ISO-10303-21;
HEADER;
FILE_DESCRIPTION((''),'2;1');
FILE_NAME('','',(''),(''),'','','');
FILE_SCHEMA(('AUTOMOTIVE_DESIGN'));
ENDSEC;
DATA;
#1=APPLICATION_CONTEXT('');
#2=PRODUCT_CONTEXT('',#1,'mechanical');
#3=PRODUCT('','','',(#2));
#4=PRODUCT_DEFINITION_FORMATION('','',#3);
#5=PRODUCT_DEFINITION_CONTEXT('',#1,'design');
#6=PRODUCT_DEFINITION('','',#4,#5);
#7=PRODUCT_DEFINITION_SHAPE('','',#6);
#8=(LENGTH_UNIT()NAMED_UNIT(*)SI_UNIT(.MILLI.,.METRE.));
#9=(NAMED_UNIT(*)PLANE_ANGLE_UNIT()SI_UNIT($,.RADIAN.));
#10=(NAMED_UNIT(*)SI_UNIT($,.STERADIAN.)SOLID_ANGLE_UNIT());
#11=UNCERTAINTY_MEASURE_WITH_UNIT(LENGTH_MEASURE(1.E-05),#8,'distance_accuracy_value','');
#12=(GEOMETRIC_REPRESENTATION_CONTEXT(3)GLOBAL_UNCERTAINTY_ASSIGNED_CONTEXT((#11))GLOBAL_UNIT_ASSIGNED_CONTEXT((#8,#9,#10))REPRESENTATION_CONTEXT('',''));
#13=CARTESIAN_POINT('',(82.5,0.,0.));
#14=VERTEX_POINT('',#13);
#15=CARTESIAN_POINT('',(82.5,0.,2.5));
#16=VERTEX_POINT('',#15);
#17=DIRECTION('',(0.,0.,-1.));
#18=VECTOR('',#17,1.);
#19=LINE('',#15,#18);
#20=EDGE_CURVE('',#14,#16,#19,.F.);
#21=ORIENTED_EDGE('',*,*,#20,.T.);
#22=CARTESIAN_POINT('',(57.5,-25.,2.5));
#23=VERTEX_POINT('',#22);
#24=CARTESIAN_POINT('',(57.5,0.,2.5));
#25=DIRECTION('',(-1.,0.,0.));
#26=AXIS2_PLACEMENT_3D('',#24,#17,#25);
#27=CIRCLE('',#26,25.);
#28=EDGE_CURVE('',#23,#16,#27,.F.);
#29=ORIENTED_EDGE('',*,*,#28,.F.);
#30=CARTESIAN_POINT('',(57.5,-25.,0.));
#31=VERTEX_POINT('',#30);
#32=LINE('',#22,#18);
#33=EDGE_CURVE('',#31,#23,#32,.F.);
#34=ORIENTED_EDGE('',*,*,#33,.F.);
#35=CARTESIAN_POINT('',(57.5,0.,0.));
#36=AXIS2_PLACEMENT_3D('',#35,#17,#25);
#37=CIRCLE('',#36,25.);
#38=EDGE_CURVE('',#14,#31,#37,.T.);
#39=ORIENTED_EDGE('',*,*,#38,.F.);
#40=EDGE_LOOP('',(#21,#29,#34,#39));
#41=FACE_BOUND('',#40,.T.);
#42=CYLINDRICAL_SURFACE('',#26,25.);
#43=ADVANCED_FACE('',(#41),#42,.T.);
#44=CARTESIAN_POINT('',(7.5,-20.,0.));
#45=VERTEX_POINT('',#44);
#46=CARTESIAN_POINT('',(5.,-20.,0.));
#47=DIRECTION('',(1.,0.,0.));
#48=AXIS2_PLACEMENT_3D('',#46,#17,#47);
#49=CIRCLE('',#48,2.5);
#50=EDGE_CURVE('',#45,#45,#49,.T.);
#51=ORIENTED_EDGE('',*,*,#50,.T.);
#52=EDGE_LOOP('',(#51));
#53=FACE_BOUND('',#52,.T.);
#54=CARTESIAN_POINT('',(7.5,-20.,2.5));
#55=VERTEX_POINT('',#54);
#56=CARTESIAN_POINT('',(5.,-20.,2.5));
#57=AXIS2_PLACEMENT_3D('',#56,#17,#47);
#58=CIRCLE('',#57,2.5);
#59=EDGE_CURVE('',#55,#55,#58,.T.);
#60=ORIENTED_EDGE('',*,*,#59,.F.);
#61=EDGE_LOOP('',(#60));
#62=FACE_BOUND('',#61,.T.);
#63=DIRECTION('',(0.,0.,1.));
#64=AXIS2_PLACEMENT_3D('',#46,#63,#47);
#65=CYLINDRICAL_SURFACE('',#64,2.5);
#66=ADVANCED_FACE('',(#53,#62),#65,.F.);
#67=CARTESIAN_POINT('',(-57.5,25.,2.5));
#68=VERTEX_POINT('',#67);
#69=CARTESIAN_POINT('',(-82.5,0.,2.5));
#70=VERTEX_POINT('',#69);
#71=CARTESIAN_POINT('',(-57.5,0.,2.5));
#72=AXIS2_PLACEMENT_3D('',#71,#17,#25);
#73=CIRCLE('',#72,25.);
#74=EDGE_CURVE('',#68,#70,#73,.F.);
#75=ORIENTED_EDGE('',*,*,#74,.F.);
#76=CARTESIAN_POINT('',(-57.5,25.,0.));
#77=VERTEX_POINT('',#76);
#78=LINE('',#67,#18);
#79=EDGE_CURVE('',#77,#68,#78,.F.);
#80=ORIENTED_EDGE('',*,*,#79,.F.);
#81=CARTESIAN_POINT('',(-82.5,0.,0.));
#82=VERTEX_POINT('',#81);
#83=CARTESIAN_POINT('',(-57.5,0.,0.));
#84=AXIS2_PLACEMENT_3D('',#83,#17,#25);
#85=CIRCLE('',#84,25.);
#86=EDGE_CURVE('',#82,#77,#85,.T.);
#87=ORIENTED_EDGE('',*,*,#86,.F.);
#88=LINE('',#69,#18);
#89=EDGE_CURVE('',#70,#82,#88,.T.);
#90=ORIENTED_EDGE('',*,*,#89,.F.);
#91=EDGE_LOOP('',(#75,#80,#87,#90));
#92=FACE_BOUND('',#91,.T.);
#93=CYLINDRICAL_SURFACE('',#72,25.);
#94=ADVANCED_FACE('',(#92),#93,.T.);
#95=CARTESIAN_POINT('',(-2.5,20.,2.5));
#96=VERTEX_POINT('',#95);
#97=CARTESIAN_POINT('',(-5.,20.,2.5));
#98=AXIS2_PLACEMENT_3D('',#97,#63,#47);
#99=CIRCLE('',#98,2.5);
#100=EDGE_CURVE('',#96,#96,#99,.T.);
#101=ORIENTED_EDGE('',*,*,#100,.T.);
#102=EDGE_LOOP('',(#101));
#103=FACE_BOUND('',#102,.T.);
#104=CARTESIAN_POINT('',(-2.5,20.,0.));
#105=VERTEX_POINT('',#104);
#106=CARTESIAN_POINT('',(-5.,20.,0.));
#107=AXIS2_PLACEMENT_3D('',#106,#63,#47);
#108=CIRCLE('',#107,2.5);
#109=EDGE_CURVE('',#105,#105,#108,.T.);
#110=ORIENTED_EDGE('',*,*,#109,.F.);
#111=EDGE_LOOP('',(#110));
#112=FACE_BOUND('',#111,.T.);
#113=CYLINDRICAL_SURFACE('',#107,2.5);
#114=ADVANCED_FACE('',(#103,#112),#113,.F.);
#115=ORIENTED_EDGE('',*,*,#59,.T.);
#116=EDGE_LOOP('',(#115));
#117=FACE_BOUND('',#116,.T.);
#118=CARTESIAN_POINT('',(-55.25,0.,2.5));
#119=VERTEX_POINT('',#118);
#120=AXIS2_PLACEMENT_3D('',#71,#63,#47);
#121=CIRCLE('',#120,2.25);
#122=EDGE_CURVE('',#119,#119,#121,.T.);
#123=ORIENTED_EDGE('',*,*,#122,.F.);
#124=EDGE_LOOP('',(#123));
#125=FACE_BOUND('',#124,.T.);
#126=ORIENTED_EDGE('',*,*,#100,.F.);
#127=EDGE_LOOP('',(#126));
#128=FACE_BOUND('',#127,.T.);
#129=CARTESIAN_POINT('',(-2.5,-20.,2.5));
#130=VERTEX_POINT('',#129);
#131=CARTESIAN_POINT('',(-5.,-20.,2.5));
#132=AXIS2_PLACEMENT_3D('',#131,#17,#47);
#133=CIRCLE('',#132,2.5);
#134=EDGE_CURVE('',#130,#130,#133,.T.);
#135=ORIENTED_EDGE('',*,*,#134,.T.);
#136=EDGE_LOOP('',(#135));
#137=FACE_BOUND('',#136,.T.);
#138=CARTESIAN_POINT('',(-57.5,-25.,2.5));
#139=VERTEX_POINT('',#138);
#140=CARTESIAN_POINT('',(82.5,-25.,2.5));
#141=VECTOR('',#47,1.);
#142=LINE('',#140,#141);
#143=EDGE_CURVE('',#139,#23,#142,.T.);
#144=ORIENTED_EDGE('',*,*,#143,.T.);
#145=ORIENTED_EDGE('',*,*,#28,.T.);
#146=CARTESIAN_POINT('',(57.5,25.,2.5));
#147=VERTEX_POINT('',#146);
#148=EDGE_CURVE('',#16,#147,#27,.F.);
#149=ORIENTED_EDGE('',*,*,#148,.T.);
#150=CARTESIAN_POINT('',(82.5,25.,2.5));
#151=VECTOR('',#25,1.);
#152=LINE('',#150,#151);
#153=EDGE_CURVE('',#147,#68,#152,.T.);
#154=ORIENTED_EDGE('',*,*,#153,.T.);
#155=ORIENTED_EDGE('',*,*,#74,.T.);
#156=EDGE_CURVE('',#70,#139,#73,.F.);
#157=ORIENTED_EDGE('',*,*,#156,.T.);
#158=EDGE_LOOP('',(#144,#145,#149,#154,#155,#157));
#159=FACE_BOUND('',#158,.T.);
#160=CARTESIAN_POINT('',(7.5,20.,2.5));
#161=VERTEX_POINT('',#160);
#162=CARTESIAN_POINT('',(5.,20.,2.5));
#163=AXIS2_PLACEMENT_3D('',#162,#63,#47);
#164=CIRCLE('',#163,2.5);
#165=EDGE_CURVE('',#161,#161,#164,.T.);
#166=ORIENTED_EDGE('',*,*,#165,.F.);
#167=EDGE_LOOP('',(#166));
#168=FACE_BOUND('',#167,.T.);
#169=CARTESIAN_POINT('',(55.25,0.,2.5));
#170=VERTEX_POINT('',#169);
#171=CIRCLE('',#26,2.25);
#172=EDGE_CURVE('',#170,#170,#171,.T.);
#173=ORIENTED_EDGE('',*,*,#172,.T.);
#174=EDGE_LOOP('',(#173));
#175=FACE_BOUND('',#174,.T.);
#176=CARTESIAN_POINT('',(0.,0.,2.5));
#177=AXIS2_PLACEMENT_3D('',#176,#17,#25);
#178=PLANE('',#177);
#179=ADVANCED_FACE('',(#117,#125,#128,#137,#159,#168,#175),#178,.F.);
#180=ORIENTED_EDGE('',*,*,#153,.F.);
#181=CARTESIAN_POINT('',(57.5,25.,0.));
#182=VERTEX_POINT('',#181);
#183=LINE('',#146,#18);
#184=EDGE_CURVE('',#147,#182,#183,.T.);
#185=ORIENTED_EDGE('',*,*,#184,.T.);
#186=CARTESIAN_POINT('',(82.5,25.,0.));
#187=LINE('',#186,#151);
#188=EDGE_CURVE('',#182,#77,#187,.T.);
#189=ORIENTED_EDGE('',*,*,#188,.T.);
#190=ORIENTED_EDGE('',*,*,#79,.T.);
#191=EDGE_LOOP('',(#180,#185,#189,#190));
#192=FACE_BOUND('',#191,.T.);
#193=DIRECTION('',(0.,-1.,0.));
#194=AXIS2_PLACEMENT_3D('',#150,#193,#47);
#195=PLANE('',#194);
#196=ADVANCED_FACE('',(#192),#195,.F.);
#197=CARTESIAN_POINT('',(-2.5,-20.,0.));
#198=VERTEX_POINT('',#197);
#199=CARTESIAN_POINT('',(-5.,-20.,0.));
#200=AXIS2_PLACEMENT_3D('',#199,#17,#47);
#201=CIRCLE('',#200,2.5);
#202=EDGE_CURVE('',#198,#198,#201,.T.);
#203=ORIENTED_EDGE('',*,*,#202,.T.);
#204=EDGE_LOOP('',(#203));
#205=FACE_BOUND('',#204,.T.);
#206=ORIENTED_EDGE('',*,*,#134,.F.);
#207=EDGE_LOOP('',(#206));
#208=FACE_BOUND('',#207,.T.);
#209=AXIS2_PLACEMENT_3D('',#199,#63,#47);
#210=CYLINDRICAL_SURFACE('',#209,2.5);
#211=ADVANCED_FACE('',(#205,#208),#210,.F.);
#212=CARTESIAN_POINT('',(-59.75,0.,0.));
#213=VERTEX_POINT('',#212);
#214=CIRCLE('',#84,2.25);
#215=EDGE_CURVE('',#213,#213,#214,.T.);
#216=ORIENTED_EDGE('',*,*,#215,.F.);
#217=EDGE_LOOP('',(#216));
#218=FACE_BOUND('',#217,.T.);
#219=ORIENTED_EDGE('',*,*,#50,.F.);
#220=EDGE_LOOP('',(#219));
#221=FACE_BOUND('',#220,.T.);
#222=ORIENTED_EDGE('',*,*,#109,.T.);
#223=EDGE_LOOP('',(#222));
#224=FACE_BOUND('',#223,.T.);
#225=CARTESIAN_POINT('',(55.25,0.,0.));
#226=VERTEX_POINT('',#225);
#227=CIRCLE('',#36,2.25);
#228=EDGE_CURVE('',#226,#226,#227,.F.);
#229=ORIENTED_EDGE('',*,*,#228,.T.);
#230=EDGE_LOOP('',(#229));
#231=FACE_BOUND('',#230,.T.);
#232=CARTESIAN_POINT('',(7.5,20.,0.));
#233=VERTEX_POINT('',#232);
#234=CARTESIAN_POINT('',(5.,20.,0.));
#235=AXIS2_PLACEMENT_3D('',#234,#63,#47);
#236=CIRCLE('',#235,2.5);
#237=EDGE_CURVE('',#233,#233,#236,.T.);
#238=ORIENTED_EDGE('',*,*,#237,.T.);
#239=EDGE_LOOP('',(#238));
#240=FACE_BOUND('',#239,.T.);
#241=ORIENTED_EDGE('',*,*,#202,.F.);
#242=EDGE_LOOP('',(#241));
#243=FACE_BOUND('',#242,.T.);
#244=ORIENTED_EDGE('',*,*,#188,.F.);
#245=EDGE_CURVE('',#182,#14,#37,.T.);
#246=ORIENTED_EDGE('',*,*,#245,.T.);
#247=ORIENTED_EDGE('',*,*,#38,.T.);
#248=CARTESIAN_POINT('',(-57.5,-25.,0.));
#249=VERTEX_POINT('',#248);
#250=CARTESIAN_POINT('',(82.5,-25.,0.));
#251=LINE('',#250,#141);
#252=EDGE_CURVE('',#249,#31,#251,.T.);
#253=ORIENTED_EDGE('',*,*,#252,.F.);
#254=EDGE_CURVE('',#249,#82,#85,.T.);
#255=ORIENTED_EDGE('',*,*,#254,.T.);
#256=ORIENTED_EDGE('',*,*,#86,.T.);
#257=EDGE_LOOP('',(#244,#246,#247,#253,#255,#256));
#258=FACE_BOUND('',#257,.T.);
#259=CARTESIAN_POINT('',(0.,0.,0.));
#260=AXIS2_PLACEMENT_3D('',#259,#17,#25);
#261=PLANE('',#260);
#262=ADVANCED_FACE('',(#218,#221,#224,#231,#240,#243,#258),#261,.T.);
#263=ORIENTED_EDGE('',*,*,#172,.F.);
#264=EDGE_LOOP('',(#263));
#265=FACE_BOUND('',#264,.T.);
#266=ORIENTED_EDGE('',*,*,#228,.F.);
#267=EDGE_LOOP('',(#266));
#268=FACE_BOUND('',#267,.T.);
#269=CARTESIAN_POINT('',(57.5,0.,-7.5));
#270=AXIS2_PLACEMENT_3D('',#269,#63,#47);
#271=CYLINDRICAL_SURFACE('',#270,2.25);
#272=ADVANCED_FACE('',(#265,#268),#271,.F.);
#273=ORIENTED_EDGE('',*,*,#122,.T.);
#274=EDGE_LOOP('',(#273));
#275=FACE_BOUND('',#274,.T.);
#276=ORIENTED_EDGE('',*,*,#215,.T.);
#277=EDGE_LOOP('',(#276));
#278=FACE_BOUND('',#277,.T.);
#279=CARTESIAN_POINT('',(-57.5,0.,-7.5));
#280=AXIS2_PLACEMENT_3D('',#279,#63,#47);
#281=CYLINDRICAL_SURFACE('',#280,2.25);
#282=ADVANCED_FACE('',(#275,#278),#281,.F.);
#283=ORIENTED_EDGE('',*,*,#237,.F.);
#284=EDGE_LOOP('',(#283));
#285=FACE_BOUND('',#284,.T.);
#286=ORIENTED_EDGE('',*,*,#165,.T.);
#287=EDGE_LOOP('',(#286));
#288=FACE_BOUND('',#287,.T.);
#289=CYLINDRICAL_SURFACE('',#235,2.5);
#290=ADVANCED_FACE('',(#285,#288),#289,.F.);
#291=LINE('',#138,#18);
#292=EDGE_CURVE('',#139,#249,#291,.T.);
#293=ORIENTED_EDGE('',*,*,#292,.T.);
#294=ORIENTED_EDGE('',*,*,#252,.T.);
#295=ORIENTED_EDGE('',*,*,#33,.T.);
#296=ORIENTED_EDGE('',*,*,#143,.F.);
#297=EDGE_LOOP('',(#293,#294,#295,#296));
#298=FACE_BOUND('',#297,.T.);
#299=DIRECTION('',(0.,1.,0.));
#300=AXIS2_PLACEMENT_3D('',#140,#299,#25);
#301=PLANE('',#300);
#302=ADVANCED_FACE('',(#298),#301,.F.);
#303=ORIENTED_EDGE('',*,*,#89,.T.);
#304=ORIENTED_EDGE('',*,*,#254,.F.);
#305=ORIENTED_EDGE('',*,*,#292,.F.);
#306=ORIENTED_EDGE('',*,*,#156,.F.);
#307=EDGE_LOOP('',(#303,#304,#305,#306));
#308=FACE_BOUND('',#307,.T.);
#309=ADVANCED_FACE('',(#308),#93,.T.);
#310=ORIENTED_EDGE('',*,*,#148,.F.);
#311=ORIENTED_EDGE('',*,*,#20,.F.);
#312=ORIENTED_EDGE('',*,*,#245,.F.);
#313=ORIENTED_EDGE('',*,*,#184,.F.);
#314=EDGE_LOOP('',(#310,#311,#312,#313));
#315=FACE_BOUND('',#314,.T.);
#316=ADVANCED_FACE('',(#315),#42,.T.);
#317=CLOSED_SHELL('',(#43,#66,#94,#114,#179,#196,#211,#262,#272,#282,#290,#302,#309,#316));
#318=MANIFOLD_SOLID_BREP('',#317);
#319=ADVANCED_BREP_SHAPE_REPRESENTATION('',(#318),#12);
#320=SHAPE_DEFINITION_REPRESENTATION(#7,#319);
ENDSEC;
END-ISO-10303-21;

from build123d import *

# Parameters (mm, degrees)
SKETCH1_W           = 165
SKETCH1_H           = 50
BOSS_EXTRUDE1_DEPTH = 2.5
FILLET1_R           = 25
SKETCH2_R           = 2.5
CUT_EXTRUDE1_DEPTH  = 2.5
SKETCH4_R           = 2.25
CUT_EXTRUDE2_DEPTH  = 10


with BuildPart() as part:
    # Sketch1 → Boss-Extrude1 (new body)
    with BuildSketch(Plane.XY):
        Rectangle(SKETCH1_W, SKETCH1_H)
    extrude(amount=BOSS_EXTRUDE1_DEPTH)

    # Fillet1
    fillet1_edges = [part.edges().sort_by_distance(p)[0] for p in [
        (-82.5, -25, 1.25),
        (-82.5, 25, 1.25),
        (82.5, -25, 1.25),
        (82.5, 25, 1.25),
    ]]
    fillet(fillet1_edges, radius=FILLET1_R - 0.0001)  # a hair under: the kernel refuses the full size

    # Sketch2 → Cut-Extrude1 (cut)
    with BuildSketch(Plane.XY.offset(2.5)):
        with Locations((-5, 20)):
            Circle(SKETCH2_R)
        with Locations((5, 20)):
            Circle(SKETCH2_R)
    cut_extrude1 = extrude(amount=-CUT_EXTRUDE1_DEPTH, mode=Mode.SUBTRACT)

    # Mirror1: Cut-Extrude1 across plane
    add(cut_extrude1.mirror(Plane.ZX), mode=Mode.SUBTRACT)

    # Sketch4 → Cut-Extrude2 (cut)
    with BuildSketch(Plane.XY.offset(2.5)):
        with Locations((-57.5, 0)):
            Circle(SKETCH4_R)
    cut_extrude2 = extrude(amount=-CUT_EXTRUDE2_DEPTH, mode=Mode.SUBTRACT)

    # Mirror2: Cut-Extrude2 across plane
    add(cut_extrude2.mirror(Plane(origin=(0, 0, 0), x_dir=(0, 0, 1), z_dir=(1, 0, 0))), mode=Mode.SUBTRACT)


solid = part.part
